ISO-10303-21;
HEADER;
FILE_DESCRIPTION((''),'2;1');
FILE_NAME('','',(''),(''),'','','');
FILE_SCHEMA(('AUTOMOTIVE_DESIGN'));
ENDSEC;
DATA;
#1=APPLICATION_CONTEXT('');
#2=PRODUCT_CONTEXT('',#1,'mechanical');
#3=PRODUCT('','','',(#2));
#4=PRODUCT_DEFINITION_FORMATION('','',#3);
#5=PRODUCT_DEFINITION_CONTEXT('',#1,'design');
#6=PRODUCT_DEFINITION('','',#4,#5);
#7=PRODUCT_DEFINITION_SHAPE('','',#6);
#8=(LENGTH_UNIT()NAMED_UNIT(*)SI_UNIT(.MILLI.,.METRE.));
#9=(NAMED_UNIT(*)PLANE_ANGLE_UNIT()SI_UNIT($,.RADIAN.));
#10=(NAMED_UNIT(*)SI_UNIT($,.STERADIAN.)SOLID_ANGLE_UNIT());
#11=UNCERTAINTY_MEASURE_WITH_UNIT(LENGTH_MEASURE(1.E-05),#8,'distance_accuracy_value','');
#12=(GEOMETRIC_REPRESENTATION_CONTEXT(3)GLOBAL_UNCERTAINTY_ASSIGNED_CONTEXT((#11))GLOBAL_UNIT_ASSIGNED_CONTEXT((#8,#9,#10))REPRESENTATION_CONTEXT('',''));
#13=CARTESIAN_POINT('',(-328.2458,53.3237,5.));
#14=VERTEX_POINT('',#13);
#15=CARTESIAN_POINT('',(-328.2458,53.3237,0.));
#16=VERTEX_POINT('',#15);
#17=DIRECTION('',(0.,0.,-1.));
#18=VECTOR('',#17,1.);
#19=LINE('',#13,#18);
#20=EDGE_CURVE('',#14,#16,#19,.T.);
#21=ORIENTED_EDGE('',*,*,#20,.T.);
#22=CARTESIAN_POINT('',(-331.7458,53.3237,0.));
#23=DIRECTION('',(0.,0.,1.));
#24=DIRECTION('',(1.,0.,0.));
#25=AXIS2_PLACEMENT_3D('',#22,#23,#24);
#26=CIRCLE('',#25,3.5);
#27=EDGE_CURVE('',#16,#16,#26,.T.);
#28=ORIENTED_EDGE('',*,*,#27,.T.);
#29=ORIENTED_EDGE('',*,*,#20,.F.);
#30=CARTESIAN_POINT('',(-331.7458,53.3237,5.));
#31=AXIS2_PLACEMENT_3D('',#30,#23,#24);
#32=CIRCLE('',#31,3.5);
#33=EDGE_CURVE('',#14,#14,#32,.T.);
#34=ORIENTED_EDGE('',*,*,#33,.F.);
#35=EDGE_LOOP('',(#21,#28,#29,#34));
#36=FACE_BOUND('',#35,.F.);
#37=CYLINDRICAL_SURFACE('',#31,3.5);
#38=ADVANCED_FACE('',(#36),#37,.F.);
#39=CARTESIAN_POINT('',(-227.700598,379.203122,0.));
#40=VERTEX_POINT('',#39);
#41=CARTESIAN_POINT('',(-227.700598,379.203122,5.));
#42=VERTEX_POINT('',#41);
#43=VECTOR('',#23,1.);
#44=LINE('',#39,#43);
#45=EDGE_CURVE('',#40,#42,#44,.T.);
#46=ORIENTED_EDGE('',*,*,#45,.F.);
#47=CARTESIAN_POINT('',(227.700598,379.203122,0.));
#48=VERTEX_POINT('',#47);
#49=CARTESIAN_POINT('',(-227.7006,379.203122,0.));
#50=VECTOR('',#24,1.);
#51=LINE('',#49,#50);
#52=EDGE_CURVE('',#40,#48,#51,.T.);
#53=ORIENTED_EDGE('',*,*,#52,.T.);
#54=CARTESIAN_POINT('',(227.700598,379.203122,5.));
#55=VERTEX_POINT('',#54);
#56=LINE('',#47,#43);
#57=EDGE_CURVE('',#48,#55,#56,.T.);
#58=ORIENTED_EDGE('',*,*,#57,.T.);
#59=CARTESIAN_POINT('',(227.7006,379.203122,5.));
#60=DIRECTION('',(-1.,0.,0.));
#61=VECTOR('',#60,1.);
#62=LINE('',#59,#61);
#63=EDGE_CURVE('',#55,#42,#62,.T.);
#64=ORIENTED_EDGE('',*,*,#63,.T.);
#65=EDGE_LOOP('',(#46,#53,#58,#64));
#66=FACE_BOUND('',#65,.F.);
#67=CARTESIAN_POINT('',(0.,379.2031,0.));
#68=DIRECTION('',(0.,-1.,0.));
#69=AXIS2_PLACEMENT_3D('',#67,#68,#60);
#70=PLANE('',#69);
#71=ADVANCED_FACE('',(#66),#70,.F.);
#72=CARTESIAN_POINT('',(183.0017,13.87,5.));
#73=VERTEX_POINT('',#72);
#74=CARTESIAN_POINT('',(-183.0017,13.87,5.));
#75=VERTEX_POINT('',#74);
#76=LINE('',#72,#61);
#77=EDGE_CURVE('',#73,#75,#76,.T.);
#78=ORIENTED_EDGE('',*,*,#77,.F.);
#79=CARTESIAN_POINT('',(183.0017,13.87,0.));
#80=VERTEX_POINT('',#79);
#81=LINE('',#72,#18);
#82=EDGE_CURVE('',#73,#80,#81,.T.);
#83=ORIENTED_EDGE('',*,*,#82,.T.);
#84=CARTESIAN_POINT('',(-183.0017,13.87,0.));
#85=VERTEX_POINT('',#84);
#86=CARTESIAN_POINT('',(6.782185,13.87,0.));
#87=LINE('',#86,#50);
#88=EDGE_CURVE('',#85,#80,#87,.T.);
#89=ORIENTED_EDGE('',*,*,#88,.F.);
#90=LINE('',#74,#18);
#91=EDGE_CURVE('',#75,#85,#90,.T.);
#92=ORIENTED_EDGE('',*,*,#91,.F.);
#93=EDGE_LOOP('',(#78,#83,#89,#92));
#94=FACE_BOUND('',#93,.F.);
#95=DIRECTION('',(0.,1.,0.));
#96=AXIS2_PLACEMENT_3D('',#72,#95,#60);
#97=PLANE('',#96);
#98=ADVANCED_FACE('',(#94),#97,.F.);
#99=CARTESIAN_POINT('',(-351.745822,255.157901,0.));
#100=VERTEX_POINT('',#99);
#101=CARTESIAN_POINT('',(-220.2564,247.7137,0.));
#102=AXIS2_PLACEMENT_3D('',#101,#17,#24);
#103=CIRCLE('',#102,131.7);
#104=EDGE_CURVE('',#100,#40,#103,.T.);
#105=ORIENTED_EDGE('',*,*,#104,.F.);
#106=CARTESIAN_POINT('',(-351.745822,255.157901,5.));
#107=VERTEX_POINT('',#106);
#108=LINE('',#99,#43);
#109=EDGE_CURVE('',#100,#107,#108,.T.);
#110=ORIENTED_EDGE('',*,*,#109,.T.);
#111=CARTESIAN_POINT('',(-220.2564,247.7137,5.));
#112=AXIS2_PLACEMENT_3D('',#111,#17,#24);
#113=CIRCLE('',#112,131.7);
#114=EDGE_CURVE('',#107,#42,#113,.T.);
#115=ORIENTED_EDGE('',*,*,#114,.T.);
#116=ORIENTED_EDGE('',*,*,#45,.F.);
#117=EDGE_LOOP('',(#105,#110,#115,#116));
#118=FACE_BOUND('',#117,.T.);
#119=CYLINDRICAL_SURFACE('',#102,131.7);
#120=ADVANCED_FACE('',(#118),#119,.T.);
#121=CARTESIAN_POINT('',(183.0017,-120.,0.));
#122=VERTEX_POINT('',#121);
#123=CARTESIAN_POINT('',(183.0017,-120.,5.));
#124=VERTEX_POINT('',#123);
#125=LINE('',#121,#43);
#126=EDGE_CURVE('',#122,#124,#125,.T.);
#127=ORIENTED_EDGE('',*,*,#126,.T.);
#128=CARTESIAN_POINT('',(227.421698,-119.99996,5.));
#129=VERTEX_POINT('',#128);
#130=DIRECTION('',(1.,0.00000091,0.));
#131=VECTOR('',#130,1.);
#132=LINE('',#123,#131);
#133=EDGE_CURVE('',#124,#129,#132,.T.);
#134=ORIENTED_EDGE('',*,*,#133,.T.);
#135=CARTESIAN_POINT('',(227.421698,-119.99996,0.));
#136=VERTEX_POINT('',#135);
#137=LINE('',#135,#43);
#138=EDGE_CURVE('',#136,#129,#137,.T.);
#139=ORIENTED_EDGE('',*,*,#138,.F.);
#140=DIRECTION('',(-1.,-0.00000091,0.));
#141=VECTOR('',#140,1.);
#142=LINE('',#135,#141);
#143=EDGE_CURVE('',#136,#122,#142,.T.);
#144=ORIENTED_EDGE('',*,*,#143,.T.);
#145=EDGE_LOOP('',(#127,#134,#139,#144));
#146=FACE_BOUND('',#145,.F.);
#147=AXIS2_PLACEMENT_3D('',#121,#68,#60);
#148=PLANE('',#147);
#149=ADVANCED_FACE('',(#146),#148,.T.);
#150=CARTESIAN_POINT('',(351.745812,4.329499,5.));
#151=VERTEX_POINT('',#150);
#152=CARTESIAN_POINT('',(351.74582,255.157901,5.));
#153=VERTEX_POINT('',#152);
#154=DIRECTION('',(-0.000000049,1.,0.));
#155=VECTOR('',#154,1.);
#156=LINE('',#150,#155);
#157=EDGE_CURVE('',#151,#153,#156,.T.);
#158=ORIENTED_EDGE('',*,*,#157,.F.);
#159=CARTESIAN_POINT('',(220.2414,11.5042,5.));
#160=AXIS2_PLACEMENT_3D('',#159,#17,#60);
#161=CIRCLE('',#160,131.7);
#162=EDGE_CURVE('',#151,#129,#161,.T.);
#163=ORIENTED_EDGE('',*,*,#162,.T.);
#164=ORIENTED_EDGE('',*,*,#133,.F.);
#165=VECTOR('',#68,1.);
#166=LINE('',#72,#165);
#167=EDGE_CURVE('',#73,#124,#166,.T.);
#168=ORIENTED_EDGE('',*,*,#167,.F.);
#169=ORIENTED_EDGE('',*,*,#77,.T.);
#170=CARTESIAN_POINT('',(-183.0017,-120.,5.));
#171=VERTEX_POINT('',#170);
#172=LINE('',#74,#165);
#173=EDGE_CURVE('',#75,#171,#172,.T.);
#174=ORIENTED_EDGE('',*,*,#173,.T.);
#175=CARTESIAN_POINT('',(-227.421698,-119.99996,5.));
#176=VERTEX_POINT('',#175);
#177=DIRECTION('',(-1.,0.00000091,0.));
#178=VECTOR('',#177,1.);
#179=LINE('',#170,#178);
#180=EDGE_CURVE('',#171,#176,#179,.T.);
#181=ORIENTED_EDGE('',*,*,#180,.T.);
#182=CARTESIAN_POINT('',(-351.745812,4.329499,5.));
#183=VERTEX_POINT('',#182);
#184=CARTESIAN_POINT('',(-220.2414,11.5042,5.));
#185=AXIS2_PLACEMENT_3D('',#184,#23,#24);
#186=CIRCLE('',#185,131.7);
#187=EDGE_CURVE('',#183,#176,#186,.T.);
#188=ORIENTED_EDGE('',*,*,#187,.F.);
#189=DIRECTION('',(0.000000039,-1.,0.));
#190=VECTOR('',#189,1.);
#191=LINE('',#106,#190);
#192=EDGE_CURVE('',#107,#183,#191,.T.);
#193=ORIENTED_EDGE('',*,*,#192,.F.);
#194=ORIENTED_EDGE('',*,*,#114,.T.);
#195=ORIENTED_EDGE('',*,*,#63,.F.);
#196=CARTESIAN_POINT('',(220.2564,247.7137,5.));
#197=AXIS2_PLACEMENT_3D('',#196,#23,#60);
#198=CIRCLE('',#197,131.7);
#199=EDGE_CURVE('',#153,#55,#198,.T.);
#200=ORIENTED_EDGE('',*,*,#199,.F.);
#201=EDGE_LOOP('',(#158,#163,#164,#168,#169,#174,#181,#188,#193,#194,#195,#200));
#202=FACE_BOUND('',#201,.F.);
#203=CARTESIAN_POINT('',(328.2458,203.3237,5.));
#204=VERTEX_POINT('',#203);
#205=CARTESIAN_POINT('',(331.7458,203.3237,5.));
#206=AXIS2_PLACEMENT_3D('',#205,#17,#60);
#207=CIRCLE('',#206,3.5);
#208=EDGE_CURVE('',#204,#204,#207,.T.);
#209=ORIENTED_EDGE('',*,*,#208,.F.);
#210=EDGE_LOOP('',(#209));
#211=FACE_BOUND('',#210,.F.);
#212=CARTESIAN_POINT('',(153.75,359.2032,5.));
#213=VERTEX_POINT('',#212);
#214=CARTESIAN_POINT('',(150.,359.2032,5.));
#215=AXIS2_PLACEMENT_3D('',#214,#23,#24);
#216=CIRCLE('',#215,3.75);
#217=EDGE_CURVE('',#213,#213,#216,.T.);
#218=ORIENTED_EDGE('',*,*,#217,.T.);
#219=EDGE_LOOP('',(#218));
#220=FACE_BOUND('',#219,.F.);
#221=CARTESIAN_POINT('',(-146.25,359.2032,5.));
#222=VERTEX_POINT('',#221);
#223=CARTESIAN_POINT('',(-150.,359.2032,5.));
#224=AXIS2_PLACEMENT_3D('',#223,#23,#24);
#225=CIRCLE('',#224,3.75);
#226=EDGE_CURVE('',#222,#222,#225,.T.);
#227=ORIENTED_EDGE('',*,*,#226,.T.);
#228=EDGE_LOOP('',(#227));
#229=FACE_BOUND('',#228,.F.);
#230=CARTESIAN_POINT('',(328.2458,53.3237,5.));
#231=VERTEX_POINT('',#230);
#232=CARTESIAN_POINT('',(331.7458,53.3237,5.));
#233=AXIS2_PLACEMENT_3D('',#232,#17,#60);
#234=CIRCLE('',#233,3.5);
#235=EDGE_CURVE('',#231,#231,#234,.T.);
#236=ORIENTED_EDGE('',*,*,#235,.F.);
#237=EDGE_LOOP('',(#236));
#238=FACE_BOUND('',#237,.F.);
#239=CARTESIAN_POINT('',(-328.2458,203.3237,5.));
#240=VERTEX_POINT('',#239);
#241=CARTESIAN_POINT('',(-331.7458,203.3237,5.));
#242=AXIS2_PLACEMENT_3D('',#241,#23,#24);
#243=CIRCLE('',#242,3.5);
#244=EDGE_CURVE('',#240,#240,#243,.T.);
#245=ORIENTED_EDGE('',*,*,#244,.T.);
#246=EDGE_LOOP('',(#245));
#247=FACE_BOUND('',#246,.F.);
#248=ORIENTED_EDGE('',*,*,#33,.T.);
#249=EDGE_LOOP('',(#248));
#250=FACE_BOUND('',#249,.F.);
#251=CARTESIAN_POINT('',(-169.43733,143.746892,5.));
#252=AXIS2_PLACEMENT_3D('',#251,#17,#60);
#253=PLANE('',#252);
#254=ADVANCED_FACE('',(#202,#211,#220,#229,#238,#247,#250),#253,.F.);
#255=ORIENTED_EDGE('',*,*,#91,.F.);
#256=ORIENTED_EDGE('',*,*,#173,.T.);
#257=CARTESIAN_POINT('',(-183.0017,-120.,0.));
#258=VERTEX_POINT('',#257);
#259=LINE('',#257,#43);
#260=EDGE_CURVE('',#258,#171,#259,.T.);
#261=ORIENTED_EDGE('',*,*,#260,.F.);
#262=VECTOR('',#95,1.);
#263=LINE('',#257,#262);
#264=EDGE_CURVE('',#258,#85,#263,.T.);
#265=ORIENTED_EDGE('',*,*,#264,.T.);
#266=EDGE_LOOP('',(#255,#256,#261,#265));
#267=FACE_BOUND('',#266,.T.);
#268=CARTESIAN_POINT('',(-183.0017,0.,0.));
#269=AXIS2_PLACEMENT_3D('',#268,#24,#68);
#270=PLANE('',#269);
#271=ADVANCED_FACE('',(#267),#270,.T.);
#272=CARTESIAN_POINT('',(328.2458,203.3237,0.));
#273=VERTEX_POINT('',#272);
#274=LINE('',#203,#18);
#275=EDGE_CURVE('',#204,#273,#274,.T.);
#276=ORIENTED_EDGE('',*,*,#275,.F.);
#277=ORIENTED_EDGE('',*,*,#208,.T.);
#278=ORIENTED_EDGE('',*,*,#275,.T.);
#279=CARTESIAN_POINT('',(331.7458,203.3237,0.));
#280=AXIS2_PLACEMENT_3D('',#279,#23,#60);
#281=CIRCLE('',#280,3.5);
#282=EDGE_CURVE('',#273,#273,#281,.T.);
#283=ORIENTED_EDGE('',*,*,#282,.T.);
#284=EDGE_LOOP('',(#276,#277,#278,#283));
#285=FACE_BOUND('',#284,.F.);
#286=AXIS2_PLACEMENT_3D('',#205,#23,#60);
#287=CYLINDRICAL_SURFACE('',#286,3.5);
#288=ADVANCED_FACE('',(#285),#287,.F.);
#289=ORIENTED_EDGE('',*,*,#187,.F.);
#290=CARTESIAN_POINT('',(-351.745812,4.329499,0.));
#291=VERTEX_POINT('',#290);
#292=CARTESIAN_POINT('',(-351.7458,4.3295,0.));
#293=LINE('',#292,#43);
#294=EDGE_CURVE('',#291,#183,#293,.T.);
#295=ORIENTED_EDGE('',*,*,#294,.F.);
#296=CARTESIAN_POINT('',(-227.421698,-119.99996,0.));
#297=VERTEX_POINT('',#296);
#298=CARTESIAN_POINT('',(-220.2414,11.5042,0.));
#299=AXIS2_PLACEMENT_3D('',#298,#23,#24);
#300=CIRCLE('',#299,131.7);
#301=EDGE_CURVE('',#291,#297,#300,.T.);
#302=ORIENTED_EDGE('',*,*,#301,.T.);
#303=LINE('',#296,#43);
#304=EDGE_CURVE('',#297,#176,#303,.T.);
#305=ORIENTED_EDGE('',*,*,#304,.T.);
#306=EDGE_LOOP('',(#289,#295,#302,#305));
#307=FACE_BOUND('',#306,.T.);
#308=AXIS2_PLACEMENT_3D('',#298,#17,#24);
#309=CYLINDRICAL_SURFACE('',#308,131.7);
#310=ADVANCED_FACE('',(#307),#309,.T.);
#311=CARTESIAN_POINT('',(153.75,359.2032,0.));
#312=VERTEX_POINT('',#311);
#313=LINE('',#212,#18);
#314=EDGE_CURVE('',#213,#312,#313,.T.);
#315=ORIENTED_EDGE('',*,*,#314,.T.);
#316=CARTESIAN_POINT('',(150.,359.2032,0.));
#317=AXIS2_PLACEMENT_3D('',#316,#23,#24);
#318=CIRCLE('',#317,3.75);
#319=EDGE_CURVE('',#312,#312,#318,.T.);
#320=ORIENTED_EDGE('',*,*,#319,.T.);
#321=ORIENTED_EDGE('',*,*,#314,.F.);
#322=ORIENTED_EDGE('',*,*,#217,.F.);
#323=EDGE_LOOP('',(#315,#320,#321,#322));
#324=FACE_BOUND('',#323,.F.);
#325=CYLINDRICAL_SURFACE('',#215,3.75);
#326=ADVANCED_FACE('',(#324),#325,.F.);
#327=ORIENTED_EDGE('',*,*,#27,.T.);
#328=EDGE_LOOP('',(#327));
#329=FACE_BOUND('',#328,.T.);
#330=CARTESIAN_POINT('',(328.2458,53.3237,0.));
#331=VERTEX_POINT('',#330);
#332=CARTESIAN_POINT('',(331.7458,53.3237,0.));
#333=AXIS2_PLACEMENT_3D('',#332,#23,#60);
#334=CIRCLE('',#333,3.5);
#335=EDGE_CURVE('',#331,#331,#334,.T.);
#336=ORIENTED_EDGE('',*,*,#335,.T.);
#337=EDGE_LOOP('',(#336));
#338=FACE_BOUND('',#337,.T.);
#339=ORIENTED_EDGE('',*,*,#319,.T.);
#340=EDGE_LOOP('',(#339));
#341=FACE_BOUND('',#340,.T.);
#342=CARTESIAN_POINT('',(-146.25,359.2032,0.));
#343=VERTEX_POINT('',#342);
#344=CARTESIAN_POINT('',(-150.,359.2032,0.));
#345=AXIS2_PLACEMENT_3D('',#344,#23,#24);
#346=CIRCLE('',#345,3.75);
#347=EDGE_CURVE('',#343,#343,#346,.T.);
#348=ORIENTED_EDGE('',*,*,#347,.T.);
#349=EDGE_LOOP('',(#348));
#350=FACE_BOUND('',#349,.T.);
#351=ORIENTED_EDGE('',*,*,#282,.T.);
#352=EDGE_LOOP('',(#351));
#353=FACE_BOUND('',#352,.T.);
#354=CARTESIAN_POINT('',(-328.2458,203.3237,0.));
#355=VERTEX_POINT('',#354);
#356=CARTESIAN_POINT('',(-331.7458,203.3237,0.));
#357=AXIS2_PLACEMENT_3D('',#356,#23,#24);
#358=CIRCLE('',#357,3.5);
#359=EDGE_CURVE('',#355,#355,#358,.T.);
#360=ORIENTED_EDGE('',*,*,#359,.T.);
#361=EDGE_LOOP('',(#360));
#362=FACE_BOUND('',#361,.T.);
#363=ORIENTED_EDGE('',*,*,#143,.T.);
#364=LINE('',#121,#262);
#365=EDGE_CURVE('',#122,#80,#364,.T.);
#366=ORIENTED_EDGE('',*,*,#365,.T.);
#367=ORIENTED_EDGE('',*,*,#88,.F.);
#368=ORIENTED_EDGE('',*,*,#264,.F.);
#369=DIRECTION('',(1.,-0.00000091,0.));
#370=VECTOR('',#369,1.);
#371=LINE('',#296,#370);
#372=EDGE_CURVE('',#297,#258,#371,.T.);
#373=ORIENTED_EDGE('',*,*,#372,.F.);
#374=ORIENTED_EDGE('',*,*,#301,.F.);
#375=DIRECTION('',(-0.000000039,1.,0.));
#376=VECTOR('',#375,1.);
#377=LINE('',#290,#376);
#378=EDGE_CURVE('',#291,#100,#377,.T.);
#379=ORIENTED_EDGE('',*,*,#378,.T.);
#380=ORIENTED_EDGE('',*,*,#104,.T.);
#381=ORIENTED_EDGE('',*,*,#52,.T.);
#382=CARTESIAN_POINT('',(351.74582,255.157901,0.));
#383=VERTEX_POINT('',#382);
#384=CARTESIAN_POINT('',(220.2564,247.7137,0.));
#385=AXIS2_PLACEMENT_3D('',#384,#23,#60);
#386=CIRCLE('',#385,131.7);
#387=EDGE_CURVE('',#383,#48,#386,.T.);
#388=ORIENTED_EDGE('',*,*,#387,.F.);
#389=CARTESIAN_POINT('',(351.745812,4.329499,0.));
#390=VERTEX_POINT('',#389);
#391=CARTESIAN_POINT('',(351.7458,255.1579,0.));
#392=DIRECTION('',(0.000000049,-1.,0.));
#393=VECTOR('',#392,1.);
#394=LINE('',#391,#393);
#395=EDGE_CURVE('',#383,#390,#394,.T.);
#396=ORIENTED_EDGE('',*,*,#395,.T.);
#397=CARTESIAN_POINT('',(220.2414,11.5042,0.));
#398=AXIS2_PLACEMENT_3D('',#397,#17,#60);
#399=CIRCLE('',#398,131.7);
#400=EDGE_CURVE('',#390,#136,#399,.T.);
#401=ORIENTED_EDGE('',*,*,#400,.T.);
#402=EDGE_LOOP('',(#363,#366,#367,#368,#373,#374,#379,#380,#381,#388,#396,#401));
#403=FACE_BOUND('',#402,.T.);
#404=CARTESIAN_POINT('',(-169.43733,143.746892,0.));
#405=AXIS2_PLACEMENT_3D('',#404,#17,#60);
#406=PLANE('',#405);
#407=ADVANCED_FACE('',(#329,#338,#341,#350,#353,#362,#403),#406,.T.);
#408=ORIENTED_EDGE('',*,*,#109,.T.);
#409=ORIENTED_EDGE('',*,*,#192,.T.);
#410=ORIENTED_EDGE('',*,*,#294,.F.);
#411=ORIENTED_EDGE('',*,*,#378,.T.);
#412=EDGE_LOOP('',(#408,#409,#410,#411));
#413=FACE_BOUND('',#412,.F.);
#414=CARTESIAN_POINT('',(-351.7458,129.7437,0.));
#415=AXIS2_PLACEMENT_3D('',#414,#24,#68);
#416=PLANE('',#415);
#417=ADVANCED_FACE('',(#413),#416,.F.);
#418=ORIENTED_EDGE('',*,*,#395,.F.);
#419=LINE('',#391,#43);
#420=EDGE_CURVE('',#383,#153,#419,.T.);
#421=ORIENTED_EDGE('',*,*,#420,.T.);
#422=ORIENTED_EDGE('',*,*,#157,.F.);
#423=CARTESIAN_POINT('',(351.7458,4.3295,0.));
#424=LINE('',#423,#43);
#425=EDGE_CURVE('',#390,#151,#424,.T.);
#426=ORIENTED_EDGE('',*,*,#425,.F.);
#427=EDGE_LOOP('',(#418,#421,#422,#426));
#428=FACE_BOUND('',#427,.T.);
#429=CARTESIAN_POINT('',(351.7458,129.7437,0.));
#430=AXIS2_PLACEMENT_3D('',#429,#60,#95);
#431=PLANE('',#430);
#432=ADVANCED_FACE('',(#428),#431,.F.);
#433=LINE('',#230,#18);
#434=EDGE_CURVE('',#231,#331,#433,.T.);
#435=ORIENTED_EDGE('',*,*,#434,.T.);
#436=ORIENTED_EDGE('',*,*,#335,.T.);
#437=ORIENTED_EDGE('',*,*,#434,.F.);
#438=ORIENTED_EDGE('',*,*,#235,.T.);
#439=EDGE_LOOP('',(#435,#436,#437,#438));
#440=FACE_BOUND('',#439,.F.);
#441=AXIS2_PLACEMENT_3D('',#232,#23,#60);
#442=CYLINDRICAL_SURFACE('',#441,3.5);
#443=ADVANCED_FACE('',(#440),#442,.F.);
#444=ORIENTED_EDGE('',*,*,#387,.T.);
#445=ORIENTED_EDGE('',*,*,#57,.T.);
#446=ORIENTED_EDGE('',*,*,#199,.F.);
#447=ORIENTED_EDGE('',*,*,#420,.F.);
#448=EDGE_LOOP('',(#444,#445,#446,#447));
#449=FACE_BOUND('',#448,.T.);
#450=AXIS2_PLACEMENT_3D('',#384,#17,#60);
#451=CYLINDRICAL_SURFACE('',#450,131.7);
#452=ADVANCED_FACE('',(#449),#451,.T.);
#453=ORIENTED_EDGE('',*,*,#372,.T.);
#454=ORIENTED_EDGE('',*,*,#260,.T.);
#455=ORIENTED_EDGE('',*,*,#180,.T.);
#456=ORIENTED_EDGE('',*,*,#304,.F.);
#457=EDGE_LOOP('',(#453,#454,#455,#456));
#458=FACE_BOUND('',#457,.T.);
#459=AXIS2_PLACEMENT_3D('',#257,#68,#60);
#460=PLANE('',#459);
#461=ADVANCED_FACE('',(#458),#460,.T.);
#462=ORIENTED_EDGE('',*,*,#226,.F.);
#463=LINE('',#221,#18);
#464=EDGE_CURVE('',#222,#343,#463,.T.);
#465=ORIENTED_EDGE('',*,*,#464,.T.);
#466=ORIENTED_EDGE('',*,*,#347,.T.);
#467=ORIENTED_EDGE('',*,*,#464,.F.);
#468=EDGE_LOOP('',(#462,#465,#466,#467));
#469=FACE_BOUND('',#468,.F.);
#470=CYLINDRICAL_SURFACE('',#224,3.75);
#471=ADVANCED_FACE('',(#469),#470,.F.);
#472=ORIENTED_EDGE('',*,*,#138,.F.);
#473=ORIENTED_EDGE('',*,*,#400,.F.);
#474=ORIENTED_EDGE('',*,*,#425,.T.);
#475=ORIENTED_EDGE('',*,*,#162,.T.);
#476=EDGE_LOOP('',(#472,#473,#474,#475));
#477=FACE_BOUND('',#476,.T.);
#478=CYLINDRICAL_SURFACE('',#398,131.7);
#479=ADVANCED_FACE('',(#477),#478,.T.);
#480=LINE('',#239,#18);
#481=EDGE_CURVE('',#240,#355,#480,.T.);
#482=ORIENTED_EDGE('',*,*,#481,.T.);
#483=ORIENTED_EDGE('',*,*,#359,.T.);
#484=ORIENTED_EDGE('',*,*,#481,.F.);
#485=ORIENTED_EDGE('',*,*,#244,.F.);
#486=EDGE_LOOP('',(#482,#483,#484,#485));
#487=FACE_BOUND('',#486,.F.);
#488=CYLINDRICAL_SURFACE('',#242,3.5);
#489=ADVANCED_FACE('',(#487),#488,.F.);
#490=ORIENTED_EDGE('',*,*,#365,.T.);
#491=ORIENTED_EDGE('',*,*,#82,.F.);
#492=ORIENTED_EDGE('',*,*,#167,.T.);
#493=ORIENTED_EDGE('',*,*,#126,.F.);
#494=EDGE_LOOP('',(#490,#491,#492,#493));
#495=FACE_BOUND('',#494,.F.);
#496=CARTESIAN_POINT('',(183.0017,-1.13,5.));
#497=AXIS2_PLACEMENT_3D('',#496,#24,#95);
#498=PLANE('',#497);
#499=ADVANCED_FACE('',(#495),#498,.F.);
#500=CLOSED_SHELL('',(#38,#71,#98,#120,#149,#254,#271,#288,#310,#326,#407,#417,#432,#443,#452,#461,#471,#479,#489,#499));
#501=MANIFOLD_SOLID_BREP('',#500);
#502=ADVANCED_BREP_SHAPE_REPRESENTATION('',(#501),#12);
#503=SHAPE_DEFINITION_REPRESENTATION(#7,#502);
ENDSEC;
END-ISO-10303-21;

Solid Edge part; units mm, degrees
sketch "Sketch1" plane through (0, 0, 0) normal (0, 0, 1) x (1, 0, 0)
  line L0 (-183.0017, -120) -> (-227.4217, -120)
  line L1 (-289.5811, -57.8353) -> (-227.4217, -120)
  line L2 (-289.5811, -57.8353) -> (-351.7458, 4.3295)
  line L3 (-351.7458, 129.7437) -> (-351.7458, 4.3295)
  line L4 (-351.7458, 129.7437) -> (-351.7458, 255.1579)
  line L5 (-289.4346, 317.4691) -> (-351.7458, 255.1579)
  line L6 (-289.4346, 317.4691) -> (-227.7006, 379.2031)
  line L7 (0, 379.2031) -> (-227.7006, 379.2031)
  line L8 (0, 379.2031) -> (0, 0)
  line L9 (0, 0) -> (-183.0017, 0)
  line L10 (-183.0017, 0) -> (-183.0017, -120)
  dimension "D1" = 351.7458
  dimension "D2" = 227.7006
  dimension "D3" = 120
  dimension "D4" = 44.42
  dimension "D5" = 87.3051
  dimension "D6" = 88.1213
  dimension "D7" = 125.4142
  dimension "D8" = 125.4142
  dimension "D9" = 87.9142
  dimension "D10" = 87.9104
  dimension "D11" = 499.2031
extrude "Protrusion1" add sketch "Sketch1" along normal blind 5
mirror "Mirror1" about plane through (0, 0, 0) normal (1, 0, 0) of "Protrusion1"
sketch "Sketch2" plane through (0, 149.6016, 5) normal (0, 0, 1) x (1, 0, 0)
  circle A0 centre (150, 209.6016) radius 3.75
  circle A1 centre (-150, 209.6016) radius 3.75
  dimension "D1" = 20
  dimension "D2" = 7.5
  dimension "D3" = 300
extrude "Cutout1" cut sketch "Sketch2" against normal through all
sketch "Sketch3" plane through (0, 149.6016, 5) normal (0, 0, 1) x (1, 0, 0)
  circle A0 centre (-331.7458, 53.7221) radius 3.5
  circle A1 centre (-331.7458, -96.2779) radius 3.5
  dimension "D1" = 160
  dimension "D2" = 20
  dimension "D3" = 6.42
  dimension "D4" = 7
  dimension "D5" = 3.58
extrude "Cutout2" cut sketch "Sketch3" against normal through all
mirror "Mirror2" about plane through (0, 0, 0) normal (1, 0, 0) of "Cutout2"
sketch "Sketch4" plane through (0, 149.6016, 0) normal (0, 0, -1) x (-1, 0, 0)
  line L0 (-351.7458, -111.1142) -> (-193.1203, -269.6016)
  line L1 (-193.1203, -269.6016) -> (-227.4217, -269.6016)
  arc A0 (-351.7458, -145.2721) -> (-227.4217, -269.6016) centre (-220.2414, -138.0974) ccw
  line L2 (-351.7458, -111.1142) -> (-351.7458, -145.2721)
  dimension "D1" = 131.7
extrude "Protrusion2" add sketch "Sketch4" against normal up to vertex (5 mm away)
sketch "Sketch5" plane through (0, 149.6016, 0) normal (0, 0, -1) x (-1, 0, 0)
  line L0 (-227.7006, 229.6016) -> (-351.7458, 105.5563)
  arc A0 (-351.7458, 105.5563) -> (-227.7006, 229.6016) centre (-220.2564, 98.1121) cw
extrude "Protrusion3" add sketch "Sketch5" against normal up to vertex (5 mm away)
mirror "Mirror3" about plane through (0, 0, 0) normal (1, 0, 0) of "Protrusion3", "Protrusion2"
sketch "Sketch6" plane through (0, 0, 2.5) normal (0, -1, 0) x (1, 0, 0)
  line L0 (-183.0017, 2.5) -> (183.0017, 2.5)
  line L1 (183.0017, 2.5) -> (183.0017, -2.5)
  line L2 (183.0017, -2.5) -> (-183.0017, -2.5)
  line L3 (-183.0017, -2.5) -> (-183.0017, 2.5)
extrude "Extrusionsausprägung_11" add sketch "Sketch6" along normal blind 1.13
sketch "Sketch7" plane through (0, 129.6016, 5) normal (0, 0, 1) x (1, 0, 0)
  line L0 (-183.0017, -130.7316) -> (183.0017, -130.7316)
  line L1 (183.0017, -130.7316) -> (183.0017, -115.7316)
  line L2 (183.0017, -115.7316) -> (-183.0017, -115.7316)
  line L3 (-183.0017, -115.7316) -> (-183.0017, -130.7316)
  dimension "D1" = 15
extrude "Cutout3" cut sketch "Sketch7" against normal through all
properties material "ABS-Plastik, mittelfest"
